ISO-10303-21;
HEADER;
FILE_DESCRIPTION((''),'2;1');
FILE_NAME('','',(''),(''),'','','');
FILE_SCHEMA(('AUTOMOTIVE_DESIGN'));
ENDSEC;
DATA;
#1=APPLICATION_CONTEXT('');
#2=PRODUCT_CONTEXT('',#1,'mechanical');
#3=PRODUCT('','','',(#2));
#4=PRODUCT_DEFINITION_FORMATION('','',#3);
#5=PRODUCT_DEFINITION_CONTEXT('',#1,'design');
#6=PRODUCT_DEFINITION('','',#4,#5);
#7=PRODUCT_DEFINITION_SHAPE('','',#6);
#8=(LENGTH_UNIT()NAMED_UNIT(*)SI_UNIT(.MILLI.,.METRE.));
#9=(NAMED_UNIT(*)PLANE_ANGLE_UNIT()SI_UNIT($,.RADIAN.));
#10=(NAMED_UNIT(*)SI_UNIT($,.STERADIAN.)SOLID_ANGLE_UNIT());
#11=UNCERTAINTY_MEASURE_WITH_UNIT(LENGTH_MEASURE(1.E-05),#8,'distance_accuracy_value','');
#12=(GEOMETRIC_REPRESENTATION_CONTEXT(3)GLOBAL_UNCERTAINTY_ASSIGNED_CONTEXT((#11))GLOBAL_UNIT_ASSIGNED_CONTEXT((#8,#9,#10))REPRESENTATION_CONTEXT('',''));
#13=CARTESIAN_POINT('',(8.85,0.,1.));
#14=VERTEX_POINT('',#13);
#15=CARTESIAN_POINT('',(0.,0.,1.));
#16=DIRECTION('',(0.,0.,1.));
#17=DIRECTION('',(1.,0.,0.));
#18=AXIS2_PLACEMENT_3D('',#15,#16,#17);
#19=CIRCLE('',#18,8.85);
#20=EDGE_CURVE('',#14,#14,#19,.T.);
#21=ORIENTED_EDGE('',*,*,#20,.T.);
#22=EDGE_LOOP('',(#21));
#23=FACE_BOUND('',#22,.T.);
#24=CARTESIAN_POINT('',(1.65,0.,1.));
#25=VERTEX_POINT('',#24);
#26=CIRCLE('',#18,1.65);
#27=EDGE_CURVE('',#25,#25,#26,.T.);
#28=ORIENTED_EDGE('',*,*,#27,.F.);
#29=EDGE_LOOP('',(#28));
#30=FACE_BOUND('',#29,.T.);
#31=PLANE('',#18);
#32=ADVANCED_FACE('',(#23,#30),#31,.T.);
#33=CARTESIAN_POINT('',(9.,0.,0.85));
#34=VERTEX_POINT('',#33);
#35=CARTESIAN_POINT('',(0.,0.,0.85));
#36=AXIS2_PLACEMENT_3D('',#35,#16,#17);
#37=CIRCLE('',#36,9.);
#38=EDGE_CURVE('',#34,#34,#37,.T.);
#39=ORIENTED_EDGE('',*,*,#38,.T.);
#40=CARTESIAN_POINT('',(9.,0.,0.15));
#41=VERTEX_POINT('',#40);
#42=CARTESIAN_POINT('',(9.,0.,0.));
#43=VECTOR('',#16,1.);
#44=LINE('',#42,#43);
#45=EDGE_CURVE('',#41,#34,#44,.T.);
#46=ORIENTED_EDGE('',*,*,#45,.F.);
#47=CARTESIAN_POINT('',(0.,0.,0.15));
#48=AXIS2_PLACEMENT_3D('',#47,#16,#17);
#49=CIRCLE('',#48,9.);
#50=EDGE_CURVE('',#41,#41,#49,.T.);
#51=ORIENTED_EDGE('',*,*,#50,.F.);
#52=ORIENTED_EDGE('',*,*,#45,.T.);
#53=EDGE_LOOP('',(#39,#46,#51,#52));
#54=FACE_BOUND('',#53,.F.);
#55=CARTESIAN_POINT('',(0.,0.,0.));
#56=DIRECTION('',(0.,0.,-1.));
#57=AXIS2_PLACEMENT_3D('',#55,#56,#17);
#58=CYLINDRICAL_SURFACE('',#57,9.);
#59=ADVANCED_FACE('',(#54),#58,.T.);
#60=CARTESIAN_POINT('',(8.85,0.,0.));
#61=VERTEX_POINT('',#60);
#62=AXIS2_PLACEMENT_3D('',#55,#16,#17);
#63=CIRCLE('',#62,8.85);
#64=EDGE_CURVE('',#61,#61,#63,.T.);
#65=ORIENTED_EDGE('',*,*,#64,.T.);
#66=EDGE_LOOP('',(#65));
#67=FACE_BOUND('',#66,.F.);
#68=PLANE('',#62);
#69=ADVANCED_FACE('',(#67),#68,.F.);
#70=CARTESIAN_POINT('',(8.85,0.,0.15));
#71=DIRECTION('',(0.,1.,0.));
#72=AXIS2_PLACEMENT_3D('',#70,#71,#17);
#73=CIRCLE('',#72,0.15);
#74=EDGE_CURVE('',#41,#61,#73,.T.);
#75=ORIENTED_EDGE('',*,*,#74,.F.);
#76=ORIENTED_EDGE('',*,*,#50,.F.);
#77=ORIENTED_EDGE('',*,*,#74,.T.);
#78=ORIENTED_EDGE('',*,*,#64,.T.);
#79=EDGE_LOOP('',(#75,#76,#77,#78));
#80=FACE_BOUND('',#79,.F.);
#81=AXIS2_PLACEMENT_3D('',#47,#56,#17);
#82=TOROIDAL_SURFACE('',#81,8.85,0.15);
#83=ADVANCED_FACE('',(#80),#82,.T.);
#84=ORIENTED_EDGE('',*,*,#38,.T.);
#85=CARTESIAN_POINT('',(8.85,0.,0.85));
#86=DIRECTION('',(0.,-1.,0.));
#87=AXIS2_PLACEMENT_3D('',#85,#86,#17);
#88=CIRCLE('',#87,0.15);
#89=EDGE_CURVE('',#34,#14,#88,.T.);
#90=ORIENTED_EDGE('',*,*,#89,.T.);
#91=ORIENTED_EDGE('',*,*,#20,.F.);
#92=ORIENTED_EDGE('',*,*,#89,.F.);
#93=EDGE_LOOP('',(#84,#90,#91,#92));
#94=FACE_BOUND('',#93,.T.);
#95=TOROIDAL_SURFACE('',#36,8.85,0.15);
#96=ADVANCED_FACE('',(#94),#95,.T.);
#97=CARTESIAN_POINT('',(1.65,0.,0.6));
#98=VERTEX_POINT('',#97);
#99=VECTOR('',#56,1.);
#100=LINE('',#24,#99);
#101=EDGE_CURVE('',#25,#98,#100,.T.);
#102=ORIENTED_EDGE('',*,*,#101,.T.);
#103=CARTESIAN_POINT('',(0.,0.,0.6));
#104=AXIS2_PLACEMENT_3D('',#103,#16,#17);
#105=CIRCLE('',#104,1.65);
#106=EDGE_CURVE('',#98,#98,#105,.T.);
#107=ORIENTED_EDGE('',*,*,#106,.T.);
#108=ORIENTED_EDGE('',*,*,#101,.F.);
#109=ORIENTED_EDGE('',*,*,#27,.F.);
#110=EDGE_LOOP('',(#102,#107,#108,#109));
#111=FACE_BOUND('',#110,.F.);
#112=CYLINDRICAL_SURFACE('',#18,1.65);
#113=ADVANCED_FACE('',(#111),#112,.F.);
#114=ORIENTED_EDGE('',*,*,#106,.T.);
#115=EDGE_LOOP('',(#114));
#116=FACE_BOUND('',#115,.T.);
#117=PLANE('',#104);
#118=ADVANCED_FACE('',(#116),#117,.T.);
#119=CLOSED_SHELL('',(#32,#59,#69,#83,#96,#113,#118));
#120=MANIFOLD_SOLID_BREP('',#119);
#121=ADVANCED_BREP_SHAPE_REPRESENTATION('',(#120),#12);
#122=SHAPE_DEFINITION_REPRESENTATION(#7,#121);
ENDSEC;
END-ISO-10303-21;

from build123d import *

# Parameters (mm, degrees)
F0_R     = 9
F1_DEPTH = 1
F2_R     = 0.15
F3_R     = 1.65
F4_DEPTH = 0.4


# Not quite as in the source:
# - a feature names something its author has since deleted; it is built from what else it names


with BuildPart() as f1:
    # F0 (on Top) → F1 (new body)
    with BuildSketch(Plane.XY):
        Circle(F0_R)
    extrude(amount=F1_DEPTH)

    # F2
    f2_edges = [f1.edges().sort_by_distance(p)[0] for p in [
        (-9, 0, 1),
        (-9, 0, 0),
    ]]
    fillet(f2_edges, radius=F2_R)

    # F3 (on face) → F4 (cut)
    with BuildSketch(Plane.XY.offset(1)):
        Circle(F3_R)
    extrude(amount=-F4_DEPTH, mode=Mode.SUBTRACT)


solid = f1.part
